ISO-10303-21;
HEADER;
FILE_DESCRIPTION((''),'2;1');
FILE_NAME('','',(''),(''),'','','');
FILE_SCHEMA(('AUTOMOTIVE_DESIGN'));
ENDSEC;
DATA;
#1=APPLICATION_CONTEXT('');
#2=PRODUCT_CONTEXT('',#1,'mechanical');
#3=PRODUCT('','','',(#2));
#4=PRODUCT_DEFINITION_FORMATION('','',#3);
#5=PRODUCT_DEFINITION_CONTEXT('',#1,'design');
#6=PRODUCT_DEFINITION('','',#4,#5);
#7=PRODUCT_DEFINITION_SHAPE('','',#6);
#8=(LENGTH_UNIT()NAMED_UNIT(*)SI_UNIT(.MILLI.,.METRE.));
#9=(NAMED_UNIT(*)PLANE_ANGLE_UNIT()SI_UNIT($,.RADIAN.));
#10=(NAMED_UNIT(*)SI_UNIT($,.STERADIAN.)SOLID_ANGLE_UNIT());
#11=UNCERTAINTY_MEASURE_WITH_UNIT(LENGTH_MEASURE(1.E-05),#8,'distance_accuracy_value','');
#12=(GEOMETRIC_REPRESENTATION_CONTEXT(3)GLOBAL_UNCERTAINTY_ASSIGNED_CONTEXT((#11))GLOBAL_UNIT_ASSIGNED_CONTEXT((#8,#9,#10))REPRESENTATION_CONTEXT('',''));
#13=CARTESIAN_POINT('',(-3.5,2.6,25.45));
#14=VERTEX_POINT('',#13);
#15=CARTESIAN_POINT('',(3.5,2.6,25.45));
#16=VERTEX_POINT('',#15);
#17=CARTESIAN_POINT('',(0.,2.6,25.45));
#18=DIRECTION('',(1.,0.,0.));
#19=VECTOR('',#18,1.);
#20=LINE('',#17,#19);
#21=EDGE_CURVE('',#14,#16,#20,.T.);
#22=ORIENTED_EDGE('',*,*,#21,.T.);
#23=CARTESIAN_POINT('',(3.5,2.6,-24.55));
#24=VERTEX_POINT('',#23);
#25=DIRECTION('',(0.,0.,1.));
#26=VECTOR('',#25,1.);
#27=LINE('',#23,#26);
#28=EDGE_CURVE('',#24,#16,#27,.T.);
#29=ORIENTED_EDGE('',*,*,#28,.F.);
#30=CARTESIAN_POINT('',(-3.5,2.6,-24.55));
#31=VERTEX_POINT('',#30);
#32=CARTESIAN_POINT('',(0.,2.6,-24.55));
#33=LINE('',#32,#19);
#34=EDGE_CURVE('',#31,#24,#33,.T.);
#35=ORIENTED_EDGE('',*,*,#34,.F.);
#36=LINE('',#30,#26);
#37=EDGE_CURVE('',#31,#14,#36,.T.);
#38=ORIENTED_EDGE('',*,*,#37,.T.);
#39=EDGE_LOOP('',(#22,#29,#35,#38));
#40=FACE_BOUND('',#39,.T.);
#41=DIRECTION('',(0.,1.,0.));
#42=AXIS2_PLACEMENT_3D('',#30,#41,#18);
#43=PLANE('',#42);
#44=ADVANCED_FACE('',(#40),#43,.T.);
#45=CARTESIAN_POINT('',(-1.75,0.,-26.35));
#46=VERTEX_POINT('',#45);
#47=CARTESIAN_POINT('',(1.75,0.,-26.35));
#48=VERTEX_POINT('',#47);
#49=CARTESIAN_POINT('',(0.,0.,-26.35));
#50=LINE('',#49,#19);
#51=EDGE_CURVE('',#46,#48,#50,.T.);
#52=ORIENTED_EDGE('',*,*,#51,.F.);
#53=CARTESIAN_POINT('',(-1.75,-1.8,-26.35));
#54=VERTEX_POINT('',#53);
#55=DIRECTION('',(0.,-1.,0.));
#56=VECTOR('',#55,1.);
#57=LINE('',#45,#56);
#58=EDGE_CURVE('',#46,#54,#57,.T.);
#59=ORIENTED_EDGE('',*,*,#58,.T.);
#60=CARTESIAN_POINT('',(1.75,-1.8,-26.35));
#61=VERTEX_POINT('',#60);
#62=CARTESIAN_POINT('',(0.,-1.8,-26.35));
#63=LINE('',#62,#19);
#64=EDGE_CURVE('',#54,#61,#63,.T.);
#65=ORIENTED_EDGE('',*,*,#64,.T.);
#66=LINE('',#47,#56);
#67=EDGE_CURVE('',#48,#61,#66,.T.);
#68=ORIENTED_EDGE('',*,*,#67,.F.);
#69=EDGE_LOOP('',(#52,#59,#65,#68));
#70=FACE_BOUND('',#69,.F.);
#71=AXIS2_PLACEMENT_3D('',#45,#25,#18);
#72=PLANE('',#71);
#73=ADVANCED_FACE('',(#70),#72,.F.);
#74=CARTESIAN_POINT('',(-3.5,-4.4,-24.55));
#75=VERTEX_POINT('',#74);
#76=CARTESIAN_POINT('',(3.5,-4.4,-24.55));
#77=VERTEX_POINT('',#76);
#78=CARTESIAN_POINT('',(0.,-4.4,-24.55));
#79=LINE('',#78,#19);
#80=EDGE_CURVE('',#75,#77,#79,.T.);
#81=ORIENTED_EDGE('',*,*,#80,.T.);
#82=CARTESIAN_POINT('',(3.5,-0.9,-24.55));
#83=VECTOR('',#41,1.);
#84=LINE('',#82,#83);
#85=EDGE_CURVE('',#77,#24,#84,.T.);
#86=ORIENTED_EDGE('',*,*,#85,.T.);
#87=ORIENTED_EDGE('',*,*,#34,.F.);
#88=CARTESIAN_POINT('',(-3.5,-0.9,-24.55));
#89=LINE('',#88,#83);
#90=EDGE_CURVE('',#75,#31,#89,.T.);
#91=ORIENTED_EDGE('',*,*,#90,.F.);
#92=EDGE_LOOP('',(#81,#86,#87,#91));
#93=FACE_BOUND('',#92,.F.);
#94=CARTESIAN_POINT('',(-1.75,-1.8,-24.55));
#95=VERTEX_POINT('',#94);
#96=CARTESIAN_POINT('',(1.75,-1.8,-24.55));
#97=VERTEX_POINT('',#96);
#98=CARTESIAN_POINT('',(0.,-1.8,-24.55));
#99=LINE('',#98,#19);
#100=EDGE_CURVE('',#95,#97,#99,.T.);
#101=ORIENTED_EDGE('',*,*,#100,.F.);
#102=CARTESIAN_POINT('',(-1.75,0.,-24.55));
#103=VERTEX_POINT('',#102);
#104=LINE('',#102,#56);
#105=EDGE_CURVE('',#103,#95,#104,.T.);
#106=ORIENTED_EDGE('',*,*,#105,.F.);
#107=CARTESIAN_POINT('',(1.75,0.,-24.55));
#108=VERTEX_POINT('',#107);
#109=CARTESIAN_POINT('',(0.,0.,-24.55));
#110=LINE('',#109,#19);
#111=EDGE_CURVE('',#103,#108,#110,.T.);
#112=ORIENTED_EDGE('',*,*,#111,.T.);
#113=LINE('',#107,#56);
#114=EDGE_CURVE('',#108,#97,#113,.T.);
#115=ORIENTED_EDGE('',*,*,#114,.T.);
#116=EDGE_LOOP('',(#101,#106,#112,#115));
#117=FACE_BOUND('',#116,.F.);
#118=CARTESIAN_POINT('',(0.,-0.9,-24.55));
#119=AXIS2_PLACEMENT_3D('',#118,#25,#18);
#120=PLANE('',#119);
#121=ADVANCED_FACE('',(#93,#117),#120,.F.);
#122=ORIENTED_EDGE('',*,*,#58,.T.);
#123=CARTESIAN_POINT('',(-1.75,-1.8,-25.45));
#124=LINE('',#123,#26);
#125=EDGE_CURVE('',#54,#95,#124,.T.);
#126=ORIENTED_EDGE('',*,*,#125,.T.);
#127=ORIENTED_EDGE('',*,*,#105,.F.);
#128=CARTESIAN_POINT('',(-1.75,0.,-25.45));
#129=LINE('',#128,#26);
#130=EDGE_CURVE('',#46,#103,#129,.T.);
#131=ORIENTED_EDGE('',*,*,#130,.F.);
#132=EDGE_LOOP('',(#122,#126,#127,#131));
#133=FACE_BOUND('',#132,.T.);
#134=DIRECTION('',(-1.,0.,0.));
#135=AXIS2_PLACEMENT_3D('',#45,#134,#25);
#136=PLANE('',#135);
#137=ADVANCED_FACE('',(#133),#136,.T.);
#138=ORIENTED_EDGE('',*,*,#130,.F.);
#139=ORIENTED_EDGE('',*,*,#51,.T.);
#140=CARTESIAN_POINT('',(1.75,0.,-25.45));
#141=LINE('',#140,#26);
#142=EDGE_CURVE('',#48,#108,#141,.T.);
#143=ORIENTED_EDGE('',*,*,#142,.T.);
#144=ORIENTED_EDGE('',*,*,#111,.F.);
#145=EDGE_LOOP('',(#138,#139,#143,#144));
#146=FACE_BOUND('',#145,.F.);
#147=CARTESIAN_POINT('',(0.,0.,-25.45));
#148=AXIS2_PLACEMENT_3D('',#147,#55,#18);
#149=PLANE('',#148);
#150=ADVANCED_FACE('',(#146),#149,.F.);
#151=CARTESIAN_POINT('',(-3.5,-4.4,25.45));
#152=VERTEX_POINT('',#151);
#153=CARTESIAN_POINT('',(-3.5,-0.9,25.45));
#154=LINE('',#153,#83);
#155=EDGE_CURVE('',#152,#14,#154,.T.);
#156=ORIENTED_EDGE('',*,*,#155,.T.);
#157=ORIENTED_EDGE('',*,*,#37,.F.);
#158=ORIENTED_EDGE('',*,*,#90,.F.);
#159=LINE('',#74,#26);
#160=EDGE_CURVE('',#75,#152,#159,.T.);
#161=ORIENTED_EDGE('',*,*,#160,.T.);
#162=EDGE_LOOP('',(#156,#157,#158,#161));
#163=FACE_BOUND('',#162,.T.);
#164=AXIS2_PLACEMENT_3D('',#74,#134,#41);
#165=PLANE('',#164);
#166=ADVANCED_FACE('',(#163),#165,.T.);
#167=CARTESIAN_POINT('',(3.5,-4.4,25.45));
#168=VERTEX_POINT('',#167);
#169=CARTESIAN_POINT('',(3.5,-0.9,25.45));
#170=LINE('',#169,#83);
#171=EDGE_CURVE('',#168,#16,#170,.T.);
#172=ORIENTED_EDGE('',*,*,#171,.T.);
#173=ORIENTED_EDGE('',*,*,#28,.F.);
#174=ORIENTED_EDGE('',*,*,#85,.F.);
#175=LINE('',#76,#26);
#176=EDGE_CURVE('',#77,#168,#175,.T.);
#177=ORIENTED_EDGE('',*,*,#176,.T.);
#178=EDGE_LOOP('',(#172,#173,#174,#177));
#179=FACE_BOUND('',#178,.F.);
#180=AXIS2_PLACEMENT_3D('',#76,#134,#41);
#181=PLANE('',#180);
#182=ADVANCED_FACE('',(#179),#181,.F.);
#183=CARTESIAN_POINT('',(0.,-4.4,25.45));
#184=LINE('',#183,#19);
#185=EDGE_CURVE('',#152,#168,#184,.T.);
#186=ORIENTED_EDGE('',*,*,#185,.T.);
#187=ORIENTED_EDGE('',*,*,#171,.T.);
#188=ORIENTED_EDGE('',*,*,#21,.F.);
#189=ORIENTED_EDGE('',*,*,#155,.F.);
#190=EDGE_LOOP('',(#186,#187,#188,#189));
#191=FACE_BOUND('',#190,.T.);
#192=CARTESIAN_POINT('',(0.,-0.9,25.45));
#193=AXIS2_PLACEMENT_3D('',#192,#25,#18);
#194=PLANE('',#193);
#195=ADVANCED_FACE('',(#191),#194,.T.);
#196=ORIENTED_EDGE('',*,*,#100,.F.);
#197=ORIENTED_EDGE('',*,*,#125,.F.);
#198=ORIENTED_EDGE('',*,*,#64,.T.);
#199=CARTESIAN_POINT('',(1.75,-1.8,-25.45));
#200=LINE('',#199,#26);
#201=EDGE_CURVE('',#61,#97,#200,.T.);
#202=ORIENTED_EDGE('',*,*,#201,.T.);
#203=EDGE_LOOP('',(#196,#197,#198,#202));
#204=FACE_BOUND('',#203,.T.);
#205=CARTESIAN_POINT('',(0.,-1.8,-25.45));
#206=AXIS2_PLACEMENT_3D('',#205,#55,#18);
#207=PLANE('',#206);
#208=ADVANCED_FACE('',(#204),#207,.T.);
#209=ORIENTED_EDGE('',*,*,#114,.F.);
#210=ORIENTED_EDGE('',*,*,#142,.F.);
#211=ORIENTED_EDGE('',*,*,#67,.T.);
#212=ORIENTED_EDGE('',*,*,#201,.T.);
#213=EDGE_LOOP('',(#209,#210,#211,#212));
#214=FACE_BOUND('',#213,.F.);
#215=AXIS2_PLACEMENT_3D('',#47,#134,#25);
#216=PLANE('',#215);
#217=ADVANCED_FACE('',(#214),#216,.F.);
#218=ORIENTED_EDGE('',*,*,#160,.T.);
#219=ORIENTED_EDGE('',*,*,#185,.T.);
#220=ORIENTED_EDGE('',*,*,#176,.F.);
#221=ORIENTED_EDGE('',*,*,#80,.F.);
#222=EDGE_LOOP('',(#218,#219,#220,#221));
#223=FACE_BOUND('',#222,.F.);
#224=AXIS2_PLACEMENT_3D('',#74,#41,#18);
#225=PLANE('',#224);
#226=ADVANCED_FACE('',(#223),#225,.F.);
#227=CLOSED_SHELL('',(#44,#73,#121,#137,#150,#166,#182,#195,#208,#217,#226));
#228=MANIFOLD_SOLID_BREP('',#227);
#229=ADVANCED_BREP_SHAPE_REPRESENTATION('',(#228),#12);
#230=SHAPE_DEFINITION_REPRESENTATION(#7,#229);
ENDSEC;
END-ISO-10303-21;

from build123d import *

# Parameters (mm, degrees)
F0_W     = 3.5
F0_H     = 1.8
F1_DEPTH = 1.8
F2_W     = 7
F2_H     = 7
F2_W_2   = 3.5
F2_H_2   = 1.8
F3_DEPTH = 50


# Not quite as in the source:
# - a feature names something its author has since deleted; it is built from what else it names


with BuildPart() as f1:
    # F0 (on Front) → F1 (new body)
    with BuildSketch(Plane.XZ):
        with Locations((0, -25.45)):
            Rectangle(F0_W, F0_H)
    extrude(amount=F1_DEPTH)

    # F2 (on face) → F3 (join)
    with BuildSketch(Plane.XY.offset(-24.55)):
        with Locations((0, -0.9)):
            Rectangle(F2_W, F2_H)
        with Locations((0, -0.9)):
            Rectangle(F2_W_2, F2_H_2, mode=Mode.SUBTRACT)
        with Locations((0, -0.9)):
            Rectangle(F2_W_2, F2_H_2)
    extrude(amount=F3_DEPTH)


solid = f1.part
